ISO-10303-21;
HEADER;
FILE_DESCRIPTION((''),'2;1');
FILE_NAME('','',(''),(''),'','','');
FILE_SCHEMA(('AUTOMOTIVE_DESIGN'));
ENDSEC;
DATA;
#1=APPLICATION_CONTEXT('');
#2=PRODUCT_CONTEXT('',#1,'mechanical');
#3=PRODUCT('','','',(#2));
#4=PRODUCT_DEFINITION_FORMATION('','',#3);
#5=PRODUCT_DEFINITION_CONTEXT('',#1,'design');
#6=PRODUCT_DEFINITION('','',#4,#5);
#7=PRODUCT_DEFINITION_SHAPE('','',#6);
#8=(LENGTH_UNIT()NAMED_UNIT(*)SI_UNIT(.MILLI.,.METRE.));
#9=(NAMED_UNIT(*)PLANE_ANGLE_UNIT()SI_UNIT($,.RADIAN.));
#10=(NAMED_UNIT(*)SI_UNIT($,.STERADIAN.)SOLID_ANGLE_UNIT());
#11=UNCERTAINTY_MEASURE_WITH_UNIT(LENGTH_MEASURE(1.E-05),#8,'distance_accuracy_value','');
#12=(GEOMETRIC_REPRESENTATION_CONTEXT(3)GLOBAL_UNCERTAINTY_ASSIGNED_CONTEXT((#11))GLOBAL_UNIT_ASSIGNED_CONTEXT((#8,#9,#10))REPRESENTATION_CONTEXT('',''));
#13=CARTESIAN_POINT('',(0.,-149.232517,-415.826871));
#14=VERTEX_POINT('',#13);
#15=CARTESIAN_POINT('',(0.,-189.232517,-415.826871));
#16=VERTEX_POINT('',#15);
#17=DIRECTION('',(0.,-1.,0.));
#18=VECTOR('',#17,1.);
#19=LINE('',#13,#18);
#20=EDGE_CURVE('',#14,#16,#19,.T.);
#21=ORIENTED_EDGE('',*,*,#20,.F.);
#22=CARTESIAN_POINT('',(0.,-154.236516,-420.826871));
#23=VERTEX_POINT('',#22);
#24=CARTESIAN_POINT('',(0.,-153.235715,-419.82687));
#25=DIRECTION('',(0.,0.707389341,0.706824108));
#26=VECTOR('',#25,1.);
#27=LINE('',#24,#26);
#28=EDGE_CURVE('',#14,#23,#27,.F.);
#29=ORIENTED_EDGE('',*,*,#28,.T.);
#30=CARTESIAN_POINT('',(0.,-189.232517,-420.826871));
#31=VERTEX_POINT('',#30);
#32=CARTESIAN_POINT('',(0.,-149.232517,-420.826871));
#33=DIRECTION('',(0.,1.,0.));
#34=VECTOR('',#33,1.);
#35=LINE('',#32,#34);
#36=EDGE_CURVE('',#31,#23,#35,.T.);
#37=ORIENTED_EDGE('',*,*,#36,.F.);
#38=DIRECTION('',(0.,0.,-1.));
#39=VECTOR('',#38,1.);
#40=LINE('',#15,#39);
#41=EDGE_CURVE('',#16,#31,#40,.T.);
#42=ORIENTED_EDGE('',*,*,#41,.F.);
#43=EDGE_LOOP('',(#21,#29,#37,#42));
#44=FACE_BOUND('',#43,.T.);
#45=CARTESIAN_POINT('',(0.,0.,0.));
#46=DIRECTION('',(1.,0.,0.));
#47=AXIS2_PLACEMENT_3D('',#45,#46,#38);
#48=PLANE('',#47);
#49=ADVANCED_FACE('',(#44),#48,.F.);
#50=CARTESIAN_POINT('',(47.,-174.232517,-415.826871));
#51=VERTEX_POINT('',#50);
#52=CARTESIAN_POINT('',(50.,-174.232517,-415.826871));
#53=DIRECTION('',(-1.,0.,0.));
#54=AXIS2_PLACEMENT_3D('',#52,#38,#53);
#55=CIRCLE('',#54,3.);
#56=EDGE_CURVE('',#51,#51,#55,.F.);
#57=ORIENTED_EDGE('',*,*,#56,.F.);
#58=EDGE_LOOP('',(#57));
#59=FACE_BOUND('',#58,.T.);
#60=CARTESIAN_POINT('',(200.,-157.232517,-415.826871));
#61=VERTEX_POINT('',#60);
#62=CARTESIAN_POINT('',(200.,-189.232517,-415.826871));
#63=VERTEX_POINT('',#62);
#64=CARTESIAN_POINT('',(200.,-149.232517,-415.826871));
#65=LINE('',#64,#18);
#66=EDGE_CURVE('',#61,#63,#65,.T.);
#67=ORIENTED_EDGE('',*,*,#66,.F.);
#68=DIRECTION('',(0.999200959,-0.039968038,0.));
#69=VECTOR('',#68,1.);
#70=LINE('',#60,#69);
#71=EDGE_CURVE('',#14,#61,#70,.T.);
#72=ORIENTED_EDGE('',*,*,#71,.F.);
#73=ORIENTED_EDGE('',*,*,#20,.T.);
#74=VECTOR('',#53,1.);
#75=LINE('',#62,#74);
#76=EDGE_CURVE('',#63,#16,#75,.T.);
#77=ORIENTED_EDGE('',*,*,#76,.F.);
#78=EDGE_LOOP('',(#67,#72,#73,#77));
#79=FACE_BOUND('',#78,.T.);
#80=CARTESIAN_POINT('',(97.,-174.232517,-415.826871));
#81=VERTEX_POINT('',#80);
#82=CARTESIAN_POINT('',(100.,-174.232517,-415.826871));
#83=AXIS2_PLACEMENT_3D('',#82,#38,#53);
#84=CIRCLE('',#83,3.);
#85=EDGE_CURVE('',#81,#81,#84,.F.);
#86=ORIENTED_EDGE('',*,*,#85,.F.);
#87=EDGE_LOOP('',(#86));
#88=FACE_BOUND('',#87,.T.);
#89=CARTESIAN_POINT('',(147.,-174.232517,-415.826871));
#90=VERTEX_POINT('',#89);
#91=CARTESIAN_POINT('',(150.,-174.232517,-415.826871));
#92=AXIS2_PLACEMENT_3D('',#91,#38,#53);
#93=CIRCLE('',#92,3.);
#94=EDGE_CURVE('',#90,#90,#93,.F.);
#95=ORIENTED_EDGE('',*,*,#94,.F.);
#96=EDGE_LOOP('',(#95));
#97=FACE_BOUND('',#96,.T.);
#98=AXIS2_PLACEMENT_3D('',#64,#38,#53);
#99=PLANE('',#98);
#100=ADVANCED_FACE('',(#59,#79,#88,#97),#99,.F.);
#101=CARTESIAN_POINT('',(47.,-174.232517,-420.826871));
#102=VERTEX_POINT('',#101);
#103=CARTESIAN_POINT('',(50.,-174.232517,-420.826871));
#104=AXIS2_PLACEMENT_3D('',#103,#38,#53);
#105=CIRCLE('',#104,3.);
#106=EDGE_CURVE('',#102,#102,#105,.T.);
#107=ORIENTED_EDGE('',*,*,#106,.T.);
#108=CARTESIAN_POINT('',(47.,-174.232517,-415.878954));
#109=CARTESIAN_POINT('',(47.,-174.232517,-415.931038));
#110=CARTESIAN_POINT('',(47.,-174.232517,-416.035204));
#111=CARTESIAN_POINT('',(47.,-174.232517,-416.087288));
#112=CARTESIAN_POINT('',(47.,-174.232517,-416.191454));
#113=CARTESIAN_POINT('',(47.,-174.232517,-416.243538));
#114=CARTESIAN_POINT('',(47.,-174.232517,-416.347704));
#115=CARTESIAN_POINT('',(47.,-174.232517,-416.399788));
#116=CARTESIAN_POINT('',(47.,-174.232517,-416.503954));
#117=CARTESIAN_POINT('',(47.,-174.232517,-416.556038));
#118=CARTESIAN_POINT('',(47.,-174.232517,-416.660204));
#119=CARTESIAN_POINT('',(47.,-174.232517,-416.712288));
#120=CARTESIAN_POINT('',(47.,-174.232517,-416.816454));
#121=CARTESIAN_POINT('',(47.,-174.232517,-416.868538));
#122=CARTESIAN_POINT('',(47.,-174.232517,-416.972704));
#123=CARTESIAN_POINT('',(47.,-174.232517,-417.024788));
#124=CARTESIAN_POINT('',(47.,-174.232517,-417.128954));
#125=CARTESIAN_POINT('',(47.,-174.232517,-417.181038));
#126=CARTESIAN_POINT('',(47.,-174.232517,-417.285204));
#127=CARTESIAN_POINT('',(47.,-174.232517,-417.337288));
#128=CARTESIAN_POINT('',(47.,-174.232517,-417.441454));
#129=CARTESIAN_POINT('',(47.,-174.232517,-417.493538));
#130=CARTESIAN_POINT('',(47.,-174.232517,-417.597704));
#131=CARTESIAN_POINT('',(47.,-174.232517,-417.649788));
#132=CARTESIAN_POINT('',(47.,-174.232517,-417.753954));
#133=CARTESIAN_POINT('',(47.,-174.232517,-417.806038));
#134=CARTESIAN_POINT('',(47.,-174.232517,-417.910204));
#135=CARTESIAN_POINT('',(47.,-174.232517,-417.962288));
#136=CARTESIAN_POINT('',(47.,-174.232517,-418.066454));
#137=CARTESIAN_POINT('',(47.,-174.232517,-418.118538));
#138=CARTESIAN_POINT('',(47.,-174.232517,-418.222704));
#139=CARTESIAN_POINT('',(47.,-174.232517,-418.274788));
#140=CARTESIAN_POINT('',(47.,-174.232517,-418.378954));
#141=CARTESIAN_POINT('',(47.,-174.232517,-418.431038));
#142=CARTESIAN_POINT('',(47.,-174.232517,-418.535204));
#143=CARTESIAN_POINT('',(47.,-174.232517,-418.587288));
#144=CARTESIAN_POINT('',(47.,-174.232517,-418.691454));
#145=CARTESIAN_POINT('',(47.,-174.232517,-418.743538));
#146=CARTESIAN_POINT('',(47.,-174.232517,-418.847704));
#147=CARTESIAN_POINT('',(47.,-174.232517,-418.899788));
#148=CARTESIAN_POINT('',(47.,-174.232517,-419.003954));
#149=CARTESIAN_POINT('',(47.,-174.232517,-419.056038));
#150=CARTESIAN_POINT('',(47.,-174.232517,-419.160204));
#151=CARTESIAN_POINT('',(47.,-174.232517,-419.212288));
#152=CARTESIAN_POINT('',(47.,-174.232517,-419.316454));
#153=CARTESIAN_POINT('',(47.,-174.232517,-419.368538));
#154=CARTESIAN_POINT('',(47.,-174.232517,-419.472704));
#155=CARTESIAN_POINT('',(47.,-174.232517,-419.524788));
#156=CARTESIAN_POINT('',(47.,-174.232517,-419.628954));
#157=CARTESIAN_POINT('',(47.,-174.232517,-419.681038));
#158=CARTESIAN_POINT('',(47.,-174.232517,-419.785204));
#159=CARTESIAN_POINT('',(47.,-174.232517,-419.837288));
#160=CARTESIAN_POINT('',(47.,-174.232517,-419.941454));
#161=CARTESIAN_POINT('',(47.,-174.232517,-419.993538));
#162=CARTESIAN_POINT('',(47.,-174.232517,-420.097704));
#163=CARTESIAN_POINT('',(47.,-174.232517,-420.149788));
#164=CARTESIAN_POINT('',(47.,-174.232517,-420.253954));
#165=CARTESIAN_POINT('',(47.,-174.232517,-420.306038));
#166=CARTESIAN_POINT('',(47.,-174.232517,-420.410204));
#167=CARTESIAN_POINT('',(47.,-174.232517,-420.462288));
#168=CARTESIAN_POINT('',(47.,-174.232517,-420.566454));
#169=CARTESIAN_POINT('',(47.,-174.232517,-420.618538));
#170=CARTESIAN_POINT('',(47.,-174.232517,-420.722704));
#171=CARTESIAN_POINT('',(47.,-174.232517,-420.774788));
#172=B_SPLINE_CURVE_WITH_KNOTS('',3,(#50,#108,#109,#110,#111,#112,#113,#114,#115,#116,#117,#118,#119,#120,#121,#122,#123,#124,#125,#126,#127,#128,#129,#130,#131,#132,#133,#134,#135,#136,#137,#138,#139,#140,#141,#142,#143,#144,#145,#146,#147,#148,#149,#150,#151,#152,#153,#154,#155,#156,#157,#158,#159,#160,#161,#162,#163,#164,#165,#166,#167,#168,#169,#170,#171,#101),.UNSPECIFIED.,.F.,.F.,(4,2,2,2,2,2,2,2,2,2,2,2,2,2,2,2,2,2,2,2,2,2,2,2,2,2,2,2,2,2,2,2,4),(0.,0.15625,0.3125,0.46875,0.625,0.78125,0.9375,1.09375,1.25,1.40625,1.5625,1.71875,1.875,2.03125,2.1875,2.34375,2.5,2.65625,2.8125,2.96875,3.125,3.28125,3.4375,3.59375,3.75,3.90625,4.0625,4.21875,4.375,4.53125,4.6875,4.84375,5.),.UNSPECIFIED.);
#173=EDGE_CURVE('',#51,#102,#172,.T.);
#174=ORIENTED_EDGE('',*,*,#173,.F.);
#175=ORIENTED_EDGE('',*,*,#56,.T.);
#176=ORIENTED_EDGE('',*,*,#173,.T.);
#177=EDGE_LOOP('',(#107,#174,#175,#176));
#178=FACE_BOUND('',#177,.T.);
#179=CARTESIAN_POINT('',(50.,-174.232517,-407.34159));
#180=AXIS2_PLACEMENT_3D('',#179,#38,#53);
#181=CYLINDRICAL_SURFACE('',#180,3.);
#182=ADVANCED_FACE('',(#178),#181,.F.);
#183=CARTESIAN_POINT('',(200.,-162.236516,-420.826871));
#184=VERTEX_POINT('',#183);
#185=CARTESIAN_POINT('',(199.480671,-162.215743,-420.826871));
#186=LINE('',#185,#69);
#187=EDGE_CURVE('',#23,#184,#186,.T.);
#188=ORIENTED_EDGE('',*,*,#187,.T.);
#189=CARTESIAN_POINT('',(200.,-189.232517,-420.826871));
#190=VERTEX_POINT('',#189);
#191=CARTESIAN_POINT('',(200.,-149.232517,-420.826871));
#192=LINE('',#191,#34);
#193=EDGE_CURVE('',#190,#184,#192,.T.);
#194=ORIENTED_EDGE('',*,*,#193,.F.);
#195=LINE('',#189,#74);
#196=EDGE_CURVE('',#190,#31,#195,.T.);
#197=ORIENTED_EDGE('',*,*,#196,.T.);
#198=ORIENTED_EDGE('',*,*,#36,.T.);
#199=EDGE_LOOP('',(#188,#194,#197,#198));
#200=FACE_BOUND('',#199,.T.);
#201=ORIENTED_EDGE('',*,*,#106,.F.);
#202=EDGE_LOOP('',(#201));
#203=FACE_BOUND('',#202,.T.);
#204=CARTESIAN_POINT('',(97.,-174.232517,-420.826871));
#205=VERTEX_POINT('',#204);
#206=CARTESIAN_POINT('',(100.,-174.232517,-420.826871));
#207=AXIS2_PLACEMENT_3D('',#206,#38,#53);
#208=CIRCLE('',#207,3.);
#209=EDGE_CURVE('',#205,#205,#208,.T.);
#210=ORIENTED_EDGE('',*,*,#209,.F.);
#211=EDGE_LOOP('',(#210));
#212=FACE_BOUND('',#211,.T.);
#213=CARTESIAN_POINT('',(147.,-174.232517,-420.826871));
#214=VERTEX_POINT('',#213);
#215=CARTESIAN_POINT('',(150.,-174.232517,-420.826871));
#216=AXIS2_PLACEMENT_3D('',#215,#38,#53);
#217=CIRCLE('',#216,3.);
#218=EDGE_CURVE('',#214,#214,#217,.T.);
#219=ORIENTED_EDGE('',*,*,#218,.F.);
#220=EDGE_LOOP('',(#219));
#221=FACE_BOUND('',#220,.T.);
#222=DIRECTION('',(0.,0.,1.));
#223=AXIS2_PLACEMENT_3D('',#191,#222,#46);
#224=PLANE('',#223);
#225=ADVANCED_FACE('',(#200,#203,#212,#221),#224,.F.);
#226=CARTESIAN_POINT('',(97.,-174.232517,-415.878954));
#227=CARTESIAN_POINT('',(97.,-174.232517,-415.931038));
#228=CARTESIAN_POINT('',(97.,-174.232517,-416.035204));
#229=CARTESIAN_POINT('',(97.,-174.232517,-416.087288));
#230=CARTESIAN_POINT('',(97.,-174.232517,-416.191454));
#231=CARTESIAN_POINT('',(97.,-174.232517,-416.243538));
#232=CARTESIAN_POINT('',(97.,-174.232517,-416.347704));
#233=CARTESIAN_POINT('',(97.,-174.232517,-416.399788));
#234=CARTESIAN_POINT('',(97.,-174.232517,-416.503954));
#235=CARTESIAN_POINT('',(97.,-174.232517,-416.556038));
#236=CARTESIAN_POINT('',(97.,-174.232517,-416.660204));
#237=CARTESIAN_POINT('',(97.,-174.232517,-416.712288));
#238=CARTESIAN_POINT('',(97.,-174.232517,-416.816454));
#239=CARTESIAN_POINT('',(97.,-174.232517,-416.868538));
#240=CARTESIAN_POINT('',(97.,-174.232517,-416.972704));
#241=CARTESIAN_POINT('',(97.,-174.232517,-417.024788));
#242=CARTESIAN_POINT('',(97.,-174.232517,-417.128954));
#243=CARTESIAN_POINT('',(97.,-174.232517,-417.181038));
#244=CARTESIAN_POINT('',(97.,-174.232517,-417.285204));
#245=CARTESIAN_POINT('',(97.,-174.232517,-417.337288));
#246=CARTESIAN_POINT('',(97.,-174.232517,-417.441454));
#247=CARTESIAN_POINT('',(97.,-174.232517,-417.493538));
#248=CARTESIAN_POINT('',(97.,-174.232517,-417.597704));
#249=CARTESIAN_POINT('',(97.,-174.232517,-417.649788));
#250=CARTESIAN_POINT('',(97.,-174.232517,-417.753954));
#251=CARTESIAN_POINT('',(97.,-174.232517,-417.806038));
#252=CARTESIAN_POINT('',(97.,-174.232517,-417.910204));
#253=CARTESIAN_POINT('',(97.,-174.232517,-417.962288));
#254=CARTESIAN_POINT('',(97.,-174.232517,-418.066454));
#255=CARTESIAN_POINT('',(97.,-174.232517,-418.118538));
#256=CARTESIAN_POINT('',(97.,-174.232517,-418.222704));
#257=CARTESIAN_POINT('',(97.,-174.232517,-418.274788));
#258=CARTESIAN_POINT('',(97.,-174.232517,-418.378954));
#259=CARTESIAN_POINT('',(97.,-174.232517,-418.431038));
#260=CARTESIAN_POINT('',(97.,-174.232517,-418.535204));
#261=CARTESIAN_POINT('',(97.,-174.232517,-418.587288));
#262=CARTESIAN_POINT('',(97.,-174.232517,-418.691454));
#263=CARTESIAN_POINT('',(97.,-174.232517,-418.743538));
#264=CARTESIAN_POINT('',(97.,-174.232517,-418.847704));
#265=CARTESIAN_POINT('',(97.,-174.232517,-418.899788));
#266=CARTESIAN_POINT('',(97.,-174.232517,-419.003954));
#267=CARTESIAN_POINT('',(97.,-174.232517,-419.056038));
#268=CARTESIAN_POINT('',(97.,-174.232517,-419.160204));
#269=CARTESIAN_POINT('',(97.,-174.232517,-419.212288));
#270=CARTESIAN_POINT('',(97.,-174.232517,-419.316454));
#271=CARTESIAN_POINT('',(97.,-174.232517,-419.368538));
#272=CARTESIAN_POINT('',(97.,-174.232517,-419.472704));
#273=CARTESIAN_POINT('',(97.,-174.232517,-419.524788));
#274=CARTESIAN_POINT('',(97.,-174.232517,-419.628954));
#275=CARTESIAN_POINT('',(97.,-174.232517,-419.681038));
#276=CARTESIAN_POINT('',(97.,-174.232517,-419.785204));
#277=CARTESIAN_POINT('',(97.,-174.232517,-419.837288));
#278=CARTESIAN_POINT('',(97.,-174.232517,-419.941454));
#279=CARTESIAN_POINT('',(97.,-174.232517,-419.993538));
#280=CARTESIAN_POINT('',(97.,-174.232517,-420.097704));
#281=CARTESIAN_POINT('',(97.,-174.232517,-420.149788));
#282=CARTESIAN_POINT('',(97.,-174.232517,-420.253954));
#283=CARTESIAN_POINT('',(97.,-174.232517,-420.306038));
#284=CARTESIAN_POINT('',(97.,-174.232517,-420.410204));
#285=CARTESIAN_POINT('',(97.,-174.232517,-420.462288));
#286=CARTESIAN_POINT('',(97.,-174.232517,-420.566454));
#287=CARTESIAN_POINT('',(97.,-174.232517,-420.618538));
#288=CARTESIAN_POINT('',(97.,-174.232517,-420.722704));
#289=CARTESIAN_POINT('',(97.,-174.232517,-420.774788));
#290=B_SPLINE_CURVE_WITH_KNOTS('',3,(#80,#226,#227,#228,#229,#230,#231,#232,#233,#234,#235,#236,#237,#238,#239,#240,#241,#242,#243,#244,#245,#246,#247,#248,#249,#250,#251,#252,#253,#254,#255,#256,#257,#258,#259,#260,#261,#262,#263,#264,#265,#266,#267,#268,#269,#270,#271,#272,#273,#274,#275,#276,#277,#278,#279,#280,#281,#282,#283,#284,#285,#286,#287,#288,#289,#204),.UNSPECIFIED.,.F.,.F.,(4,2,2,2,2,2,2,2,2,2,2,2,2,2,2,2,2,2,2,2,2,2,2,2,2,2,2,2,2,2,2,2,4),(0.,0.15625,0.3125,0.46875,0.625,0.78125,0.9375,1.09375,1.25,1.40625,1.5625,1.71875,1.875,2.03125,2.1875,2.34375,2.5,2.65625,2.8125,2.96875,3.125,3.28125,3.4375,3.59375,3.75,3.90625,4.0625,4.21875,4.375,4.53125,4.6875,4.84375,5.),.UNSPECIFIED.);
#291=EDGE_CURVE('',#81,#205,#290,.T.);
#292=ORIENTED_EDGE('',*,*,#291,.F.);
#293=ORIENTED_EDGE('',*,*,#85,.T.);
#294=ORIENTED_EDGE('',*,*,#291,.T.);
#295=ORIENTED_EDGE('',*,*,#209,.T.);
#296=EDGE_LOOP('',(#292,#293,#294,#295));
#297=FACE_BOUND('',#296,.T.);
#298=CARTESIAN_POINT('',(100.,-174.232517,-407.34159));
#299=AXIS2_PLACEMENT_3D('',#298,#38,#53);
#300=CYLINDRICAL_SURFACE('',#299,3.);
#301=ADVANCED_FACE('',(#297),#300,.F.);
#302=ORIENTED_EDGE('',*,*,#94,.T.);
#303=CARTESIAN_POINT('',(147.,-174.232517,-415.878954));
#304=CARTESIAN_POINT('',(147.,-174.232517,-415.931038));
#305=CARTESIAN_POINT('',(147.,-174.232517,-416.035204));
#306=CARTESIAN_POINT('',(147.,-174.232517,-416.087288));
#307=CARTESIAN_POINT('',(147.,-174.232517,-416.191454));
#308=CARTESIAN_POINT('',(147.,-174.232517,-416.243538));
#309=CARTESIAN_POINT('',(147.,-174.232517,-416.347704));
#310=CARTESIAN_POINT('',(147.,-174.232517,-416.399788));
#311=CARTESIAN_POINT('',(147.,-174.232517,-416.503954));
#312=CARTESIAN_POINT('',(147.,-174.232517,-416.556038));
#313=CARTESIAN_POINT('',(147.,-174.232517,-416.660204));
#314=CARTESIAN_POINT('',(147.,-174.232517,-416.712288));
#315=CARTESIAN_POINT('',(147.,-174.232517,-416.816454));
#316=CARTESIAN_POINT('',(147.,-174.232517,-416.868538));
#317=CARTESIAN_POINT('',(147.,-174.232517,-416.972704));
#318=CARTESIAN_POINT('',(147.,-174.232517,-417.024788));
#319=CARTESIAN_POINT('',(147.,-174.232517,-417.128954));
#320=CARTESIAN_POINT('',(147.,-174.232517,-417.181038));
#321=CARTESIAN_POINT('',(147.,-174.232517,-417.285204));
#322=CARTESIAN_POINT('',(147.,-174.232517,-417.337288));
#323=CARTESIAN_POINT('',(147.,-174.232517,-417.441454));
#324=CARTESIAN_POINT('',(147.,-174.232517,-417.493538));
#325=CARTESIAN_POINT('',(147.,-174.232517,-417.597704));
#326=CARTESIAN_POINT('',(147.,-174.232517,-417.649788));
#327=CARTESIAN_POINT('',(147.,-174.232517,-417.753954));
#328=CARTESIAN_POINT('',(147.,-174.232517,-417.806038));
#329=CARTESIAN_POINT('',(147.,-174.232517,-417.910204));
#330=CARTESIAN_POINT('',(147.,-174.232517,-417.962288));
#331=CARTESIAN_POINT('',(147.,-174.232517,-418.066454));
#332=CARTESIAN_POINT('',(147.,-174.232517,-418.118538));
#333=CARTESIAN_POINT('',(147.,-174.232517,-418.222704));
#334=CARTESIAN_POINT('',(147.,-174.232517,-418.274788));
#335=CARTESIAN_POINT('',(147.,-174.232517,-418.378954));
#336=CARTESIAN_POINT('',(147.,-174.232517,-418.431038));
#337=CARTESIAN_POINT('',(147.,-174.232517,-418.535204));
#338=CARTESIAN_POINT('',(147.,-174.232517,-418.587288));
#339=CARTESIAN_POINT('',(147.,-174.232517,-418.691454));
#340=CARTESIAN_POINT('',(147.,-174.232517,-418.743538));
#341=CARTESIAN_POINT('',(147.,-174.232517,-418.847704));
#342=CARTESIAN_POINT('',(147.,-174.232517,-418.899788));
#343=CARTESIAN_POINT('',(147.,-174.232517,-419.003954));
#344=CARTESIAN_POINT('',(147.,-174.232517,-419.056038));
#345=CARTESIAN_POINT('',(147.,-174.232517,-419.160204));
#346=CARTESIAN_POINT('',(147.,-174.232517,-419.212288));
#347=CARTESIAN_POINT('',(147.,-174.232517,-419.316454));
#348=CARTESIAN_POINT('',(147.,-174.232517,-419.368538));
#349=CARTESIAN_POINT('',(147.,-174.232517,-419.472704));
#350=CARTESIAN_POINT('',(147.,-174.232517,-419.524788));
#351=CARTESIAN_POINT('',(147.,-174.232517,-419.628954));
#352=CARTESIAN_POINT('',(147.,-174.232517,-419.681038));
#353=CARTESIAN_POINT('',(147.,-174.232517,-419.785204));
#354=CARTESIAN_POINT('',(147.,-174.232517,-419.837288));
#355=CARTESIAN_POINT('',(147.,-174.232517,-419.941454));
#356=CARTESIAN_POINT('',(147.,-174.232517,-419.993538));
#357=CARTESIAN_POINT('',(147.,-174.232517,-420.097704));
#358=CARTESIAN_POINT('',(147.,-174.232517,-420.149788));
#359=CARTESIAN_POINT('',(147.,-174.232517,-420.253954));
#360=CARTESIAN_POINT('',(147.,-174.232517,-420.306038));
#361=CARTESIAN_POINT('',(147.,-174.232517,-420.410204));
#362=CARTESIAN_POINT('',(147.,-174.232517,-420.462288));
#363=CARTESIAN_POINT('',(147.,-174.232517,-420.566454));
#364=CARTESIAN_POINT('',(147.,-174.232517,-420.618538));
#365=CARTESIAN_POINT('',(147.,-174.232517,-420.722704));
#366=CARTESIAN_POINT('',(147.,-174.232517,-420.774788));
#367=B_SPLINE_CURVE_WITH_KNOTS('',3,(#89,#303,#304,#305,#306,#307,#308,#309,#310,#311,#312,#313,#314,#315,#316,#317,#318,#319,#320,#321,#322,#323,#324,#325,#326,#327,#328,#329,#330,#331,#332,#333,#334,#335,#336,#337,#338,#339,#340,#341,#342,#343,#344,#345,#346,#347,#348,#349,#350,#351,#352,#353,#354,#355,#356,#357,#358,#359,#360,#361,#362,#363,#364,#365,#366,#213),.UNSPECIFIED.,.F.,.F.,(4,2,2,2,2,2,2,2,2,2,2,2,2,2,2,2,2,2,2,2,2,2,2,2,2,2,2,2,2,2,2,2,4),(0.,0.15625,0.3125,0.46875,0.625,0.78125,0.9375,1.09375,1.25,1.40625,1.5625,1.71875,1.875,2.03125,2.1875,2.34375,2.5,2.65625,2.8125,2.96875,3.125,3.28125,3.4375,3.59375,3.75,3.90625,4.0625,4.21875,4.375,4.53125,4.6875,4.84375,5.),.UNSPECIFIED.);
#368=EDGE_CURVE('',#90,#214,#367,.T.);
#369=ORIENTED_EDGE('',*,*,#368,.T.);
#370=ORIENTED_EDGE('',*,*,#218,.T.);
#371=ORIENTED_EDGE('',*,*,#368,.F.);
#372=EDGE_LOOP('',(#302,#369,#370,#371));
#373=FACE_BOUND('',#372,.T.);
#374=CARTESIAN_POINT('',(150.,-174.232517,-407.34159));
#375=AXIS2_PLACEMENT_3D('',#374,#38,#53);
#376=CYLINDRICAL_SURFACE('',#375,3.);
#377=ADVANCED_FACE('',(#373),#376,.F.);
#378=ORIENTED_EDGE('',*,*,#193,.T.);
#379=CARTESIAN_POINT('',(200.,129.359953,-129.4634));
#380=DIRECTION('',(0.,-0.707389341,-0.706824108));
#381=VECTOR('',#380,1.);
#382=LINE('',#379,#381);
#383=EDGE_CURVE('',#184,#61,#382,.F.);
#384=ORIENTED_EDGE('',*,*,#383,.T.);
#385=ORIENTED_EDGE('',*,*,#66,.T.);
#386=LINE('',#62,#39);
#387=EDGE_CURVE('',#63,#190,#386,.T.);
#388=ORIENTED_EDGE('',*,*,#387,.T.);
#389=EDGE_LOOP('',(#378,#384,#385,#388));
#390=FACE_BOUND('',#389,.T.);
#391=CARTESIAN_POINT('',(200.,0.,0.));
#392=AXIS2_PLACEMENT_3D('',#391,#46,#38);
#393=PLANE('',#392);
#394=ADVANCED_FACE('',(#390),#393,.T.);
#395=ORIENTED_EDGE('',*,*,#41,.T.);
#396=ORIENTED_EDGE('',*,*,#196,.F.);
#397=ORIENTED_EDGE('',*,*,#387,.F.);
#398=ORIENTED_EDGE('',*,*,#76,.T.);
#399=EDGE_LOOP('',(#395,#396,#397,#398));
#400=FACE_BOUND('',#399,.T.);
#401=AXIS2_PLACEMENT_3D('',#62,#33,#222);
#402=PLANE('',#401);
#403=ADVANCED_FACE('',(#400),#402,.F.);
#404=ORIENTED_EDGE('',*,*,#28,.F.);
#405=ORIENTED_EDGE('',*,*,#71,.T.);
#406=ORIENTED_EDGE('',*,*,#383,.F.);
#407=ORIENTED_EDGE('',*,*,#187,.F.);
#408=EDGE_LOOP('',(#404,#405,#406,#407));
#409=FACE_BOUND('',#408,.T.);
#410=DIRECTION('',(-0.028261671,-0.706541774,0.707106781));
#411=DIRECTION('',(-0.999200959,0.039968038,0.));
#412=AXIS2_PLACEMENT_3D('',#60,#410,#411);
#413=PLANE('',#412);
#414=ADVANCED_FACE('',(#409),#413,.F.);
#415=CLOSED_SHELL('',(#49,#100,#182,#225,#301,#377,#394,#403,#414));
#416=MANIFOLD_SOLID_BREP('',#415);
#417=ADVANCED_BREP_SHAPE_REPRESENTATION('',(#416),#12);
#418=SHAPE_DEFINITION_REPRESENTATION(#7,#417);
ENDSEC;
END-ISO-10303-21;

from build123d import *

# Parameters (mm, degrees)
SKETCH1_W           = 5
SKETCH1_H           = 40
BOSS_EXTRUDE1_DEPTH = 200
CUT_EXTRUDE2_DEPTH  = 5
CHAMFER1_SIZE       = 5
SKETCH2_R           = 3
CUT_EXTRUDE1_DEPTH  = 5
LPATTERN1_COUNT     = 3
LPATTERN1_PITCH     = 50


with BuildPart() as part:
    # Sketch1 → Boss-Extrude1 (new body)
    with BuildSketch(Plane(origin=(0, 0, 0), x_dir=(0, 0, -1), z_dir=(1, 0, 0))):
        with Locations((418.326871087, -169.232517464)):
            Rectangle(SKETCH1_W, SKETCH1_H)
    extrude(amount=BOSS_EXTRUDE1_DEPTH)

    # Sketch3 → Cut-Extrude2 (cut)
    with BuildSketch(Plane.XY.offset(-415.826871087)):
        Polygon((0, -149.232517464), (200, -149.232517464), (200, -157.232517464), align=None)
    extrude(amount=-CUT_EXTRUDE2_DEPTH, mode=Mode.SUBTRACT)

    # Chamfer1
    chamfer1_edges = [part.edges().sort_by_distance(p)[0] for p in [
        (100, -153.232517464, -420.826871087),
    ]]
    chamfer(chamfer1_edges, length=CHAMFER1_SIZE - 0.0001)  # a hair under: the kernel refuses the full size

    # Sketch2 → Cut-Extrude1 (cut)
    with BuildSketch(Plane(origin=(0, 0, -420.826871087), x_dir=(-1, 0, 0), z_dir=(0, 0, -1))):
        with Locations((-50, -174.232517464)):
            Circle(SKETCH2_R)
    cut_extrude1 = extrude(amount=-CUT_EXTRUDE1_DEPTH, mode=Mode.SUBTRACT)

    # LPattern1: Cut-Extrude1 ×3
    with Locations(*[(i * LPATTERN1_PITCH, 0, 0) for i in range(1, LPATTERN1_COUNT)]):
        add(cut_extrude1, mode=Mode.SUBTRACT)


solid = part.part
